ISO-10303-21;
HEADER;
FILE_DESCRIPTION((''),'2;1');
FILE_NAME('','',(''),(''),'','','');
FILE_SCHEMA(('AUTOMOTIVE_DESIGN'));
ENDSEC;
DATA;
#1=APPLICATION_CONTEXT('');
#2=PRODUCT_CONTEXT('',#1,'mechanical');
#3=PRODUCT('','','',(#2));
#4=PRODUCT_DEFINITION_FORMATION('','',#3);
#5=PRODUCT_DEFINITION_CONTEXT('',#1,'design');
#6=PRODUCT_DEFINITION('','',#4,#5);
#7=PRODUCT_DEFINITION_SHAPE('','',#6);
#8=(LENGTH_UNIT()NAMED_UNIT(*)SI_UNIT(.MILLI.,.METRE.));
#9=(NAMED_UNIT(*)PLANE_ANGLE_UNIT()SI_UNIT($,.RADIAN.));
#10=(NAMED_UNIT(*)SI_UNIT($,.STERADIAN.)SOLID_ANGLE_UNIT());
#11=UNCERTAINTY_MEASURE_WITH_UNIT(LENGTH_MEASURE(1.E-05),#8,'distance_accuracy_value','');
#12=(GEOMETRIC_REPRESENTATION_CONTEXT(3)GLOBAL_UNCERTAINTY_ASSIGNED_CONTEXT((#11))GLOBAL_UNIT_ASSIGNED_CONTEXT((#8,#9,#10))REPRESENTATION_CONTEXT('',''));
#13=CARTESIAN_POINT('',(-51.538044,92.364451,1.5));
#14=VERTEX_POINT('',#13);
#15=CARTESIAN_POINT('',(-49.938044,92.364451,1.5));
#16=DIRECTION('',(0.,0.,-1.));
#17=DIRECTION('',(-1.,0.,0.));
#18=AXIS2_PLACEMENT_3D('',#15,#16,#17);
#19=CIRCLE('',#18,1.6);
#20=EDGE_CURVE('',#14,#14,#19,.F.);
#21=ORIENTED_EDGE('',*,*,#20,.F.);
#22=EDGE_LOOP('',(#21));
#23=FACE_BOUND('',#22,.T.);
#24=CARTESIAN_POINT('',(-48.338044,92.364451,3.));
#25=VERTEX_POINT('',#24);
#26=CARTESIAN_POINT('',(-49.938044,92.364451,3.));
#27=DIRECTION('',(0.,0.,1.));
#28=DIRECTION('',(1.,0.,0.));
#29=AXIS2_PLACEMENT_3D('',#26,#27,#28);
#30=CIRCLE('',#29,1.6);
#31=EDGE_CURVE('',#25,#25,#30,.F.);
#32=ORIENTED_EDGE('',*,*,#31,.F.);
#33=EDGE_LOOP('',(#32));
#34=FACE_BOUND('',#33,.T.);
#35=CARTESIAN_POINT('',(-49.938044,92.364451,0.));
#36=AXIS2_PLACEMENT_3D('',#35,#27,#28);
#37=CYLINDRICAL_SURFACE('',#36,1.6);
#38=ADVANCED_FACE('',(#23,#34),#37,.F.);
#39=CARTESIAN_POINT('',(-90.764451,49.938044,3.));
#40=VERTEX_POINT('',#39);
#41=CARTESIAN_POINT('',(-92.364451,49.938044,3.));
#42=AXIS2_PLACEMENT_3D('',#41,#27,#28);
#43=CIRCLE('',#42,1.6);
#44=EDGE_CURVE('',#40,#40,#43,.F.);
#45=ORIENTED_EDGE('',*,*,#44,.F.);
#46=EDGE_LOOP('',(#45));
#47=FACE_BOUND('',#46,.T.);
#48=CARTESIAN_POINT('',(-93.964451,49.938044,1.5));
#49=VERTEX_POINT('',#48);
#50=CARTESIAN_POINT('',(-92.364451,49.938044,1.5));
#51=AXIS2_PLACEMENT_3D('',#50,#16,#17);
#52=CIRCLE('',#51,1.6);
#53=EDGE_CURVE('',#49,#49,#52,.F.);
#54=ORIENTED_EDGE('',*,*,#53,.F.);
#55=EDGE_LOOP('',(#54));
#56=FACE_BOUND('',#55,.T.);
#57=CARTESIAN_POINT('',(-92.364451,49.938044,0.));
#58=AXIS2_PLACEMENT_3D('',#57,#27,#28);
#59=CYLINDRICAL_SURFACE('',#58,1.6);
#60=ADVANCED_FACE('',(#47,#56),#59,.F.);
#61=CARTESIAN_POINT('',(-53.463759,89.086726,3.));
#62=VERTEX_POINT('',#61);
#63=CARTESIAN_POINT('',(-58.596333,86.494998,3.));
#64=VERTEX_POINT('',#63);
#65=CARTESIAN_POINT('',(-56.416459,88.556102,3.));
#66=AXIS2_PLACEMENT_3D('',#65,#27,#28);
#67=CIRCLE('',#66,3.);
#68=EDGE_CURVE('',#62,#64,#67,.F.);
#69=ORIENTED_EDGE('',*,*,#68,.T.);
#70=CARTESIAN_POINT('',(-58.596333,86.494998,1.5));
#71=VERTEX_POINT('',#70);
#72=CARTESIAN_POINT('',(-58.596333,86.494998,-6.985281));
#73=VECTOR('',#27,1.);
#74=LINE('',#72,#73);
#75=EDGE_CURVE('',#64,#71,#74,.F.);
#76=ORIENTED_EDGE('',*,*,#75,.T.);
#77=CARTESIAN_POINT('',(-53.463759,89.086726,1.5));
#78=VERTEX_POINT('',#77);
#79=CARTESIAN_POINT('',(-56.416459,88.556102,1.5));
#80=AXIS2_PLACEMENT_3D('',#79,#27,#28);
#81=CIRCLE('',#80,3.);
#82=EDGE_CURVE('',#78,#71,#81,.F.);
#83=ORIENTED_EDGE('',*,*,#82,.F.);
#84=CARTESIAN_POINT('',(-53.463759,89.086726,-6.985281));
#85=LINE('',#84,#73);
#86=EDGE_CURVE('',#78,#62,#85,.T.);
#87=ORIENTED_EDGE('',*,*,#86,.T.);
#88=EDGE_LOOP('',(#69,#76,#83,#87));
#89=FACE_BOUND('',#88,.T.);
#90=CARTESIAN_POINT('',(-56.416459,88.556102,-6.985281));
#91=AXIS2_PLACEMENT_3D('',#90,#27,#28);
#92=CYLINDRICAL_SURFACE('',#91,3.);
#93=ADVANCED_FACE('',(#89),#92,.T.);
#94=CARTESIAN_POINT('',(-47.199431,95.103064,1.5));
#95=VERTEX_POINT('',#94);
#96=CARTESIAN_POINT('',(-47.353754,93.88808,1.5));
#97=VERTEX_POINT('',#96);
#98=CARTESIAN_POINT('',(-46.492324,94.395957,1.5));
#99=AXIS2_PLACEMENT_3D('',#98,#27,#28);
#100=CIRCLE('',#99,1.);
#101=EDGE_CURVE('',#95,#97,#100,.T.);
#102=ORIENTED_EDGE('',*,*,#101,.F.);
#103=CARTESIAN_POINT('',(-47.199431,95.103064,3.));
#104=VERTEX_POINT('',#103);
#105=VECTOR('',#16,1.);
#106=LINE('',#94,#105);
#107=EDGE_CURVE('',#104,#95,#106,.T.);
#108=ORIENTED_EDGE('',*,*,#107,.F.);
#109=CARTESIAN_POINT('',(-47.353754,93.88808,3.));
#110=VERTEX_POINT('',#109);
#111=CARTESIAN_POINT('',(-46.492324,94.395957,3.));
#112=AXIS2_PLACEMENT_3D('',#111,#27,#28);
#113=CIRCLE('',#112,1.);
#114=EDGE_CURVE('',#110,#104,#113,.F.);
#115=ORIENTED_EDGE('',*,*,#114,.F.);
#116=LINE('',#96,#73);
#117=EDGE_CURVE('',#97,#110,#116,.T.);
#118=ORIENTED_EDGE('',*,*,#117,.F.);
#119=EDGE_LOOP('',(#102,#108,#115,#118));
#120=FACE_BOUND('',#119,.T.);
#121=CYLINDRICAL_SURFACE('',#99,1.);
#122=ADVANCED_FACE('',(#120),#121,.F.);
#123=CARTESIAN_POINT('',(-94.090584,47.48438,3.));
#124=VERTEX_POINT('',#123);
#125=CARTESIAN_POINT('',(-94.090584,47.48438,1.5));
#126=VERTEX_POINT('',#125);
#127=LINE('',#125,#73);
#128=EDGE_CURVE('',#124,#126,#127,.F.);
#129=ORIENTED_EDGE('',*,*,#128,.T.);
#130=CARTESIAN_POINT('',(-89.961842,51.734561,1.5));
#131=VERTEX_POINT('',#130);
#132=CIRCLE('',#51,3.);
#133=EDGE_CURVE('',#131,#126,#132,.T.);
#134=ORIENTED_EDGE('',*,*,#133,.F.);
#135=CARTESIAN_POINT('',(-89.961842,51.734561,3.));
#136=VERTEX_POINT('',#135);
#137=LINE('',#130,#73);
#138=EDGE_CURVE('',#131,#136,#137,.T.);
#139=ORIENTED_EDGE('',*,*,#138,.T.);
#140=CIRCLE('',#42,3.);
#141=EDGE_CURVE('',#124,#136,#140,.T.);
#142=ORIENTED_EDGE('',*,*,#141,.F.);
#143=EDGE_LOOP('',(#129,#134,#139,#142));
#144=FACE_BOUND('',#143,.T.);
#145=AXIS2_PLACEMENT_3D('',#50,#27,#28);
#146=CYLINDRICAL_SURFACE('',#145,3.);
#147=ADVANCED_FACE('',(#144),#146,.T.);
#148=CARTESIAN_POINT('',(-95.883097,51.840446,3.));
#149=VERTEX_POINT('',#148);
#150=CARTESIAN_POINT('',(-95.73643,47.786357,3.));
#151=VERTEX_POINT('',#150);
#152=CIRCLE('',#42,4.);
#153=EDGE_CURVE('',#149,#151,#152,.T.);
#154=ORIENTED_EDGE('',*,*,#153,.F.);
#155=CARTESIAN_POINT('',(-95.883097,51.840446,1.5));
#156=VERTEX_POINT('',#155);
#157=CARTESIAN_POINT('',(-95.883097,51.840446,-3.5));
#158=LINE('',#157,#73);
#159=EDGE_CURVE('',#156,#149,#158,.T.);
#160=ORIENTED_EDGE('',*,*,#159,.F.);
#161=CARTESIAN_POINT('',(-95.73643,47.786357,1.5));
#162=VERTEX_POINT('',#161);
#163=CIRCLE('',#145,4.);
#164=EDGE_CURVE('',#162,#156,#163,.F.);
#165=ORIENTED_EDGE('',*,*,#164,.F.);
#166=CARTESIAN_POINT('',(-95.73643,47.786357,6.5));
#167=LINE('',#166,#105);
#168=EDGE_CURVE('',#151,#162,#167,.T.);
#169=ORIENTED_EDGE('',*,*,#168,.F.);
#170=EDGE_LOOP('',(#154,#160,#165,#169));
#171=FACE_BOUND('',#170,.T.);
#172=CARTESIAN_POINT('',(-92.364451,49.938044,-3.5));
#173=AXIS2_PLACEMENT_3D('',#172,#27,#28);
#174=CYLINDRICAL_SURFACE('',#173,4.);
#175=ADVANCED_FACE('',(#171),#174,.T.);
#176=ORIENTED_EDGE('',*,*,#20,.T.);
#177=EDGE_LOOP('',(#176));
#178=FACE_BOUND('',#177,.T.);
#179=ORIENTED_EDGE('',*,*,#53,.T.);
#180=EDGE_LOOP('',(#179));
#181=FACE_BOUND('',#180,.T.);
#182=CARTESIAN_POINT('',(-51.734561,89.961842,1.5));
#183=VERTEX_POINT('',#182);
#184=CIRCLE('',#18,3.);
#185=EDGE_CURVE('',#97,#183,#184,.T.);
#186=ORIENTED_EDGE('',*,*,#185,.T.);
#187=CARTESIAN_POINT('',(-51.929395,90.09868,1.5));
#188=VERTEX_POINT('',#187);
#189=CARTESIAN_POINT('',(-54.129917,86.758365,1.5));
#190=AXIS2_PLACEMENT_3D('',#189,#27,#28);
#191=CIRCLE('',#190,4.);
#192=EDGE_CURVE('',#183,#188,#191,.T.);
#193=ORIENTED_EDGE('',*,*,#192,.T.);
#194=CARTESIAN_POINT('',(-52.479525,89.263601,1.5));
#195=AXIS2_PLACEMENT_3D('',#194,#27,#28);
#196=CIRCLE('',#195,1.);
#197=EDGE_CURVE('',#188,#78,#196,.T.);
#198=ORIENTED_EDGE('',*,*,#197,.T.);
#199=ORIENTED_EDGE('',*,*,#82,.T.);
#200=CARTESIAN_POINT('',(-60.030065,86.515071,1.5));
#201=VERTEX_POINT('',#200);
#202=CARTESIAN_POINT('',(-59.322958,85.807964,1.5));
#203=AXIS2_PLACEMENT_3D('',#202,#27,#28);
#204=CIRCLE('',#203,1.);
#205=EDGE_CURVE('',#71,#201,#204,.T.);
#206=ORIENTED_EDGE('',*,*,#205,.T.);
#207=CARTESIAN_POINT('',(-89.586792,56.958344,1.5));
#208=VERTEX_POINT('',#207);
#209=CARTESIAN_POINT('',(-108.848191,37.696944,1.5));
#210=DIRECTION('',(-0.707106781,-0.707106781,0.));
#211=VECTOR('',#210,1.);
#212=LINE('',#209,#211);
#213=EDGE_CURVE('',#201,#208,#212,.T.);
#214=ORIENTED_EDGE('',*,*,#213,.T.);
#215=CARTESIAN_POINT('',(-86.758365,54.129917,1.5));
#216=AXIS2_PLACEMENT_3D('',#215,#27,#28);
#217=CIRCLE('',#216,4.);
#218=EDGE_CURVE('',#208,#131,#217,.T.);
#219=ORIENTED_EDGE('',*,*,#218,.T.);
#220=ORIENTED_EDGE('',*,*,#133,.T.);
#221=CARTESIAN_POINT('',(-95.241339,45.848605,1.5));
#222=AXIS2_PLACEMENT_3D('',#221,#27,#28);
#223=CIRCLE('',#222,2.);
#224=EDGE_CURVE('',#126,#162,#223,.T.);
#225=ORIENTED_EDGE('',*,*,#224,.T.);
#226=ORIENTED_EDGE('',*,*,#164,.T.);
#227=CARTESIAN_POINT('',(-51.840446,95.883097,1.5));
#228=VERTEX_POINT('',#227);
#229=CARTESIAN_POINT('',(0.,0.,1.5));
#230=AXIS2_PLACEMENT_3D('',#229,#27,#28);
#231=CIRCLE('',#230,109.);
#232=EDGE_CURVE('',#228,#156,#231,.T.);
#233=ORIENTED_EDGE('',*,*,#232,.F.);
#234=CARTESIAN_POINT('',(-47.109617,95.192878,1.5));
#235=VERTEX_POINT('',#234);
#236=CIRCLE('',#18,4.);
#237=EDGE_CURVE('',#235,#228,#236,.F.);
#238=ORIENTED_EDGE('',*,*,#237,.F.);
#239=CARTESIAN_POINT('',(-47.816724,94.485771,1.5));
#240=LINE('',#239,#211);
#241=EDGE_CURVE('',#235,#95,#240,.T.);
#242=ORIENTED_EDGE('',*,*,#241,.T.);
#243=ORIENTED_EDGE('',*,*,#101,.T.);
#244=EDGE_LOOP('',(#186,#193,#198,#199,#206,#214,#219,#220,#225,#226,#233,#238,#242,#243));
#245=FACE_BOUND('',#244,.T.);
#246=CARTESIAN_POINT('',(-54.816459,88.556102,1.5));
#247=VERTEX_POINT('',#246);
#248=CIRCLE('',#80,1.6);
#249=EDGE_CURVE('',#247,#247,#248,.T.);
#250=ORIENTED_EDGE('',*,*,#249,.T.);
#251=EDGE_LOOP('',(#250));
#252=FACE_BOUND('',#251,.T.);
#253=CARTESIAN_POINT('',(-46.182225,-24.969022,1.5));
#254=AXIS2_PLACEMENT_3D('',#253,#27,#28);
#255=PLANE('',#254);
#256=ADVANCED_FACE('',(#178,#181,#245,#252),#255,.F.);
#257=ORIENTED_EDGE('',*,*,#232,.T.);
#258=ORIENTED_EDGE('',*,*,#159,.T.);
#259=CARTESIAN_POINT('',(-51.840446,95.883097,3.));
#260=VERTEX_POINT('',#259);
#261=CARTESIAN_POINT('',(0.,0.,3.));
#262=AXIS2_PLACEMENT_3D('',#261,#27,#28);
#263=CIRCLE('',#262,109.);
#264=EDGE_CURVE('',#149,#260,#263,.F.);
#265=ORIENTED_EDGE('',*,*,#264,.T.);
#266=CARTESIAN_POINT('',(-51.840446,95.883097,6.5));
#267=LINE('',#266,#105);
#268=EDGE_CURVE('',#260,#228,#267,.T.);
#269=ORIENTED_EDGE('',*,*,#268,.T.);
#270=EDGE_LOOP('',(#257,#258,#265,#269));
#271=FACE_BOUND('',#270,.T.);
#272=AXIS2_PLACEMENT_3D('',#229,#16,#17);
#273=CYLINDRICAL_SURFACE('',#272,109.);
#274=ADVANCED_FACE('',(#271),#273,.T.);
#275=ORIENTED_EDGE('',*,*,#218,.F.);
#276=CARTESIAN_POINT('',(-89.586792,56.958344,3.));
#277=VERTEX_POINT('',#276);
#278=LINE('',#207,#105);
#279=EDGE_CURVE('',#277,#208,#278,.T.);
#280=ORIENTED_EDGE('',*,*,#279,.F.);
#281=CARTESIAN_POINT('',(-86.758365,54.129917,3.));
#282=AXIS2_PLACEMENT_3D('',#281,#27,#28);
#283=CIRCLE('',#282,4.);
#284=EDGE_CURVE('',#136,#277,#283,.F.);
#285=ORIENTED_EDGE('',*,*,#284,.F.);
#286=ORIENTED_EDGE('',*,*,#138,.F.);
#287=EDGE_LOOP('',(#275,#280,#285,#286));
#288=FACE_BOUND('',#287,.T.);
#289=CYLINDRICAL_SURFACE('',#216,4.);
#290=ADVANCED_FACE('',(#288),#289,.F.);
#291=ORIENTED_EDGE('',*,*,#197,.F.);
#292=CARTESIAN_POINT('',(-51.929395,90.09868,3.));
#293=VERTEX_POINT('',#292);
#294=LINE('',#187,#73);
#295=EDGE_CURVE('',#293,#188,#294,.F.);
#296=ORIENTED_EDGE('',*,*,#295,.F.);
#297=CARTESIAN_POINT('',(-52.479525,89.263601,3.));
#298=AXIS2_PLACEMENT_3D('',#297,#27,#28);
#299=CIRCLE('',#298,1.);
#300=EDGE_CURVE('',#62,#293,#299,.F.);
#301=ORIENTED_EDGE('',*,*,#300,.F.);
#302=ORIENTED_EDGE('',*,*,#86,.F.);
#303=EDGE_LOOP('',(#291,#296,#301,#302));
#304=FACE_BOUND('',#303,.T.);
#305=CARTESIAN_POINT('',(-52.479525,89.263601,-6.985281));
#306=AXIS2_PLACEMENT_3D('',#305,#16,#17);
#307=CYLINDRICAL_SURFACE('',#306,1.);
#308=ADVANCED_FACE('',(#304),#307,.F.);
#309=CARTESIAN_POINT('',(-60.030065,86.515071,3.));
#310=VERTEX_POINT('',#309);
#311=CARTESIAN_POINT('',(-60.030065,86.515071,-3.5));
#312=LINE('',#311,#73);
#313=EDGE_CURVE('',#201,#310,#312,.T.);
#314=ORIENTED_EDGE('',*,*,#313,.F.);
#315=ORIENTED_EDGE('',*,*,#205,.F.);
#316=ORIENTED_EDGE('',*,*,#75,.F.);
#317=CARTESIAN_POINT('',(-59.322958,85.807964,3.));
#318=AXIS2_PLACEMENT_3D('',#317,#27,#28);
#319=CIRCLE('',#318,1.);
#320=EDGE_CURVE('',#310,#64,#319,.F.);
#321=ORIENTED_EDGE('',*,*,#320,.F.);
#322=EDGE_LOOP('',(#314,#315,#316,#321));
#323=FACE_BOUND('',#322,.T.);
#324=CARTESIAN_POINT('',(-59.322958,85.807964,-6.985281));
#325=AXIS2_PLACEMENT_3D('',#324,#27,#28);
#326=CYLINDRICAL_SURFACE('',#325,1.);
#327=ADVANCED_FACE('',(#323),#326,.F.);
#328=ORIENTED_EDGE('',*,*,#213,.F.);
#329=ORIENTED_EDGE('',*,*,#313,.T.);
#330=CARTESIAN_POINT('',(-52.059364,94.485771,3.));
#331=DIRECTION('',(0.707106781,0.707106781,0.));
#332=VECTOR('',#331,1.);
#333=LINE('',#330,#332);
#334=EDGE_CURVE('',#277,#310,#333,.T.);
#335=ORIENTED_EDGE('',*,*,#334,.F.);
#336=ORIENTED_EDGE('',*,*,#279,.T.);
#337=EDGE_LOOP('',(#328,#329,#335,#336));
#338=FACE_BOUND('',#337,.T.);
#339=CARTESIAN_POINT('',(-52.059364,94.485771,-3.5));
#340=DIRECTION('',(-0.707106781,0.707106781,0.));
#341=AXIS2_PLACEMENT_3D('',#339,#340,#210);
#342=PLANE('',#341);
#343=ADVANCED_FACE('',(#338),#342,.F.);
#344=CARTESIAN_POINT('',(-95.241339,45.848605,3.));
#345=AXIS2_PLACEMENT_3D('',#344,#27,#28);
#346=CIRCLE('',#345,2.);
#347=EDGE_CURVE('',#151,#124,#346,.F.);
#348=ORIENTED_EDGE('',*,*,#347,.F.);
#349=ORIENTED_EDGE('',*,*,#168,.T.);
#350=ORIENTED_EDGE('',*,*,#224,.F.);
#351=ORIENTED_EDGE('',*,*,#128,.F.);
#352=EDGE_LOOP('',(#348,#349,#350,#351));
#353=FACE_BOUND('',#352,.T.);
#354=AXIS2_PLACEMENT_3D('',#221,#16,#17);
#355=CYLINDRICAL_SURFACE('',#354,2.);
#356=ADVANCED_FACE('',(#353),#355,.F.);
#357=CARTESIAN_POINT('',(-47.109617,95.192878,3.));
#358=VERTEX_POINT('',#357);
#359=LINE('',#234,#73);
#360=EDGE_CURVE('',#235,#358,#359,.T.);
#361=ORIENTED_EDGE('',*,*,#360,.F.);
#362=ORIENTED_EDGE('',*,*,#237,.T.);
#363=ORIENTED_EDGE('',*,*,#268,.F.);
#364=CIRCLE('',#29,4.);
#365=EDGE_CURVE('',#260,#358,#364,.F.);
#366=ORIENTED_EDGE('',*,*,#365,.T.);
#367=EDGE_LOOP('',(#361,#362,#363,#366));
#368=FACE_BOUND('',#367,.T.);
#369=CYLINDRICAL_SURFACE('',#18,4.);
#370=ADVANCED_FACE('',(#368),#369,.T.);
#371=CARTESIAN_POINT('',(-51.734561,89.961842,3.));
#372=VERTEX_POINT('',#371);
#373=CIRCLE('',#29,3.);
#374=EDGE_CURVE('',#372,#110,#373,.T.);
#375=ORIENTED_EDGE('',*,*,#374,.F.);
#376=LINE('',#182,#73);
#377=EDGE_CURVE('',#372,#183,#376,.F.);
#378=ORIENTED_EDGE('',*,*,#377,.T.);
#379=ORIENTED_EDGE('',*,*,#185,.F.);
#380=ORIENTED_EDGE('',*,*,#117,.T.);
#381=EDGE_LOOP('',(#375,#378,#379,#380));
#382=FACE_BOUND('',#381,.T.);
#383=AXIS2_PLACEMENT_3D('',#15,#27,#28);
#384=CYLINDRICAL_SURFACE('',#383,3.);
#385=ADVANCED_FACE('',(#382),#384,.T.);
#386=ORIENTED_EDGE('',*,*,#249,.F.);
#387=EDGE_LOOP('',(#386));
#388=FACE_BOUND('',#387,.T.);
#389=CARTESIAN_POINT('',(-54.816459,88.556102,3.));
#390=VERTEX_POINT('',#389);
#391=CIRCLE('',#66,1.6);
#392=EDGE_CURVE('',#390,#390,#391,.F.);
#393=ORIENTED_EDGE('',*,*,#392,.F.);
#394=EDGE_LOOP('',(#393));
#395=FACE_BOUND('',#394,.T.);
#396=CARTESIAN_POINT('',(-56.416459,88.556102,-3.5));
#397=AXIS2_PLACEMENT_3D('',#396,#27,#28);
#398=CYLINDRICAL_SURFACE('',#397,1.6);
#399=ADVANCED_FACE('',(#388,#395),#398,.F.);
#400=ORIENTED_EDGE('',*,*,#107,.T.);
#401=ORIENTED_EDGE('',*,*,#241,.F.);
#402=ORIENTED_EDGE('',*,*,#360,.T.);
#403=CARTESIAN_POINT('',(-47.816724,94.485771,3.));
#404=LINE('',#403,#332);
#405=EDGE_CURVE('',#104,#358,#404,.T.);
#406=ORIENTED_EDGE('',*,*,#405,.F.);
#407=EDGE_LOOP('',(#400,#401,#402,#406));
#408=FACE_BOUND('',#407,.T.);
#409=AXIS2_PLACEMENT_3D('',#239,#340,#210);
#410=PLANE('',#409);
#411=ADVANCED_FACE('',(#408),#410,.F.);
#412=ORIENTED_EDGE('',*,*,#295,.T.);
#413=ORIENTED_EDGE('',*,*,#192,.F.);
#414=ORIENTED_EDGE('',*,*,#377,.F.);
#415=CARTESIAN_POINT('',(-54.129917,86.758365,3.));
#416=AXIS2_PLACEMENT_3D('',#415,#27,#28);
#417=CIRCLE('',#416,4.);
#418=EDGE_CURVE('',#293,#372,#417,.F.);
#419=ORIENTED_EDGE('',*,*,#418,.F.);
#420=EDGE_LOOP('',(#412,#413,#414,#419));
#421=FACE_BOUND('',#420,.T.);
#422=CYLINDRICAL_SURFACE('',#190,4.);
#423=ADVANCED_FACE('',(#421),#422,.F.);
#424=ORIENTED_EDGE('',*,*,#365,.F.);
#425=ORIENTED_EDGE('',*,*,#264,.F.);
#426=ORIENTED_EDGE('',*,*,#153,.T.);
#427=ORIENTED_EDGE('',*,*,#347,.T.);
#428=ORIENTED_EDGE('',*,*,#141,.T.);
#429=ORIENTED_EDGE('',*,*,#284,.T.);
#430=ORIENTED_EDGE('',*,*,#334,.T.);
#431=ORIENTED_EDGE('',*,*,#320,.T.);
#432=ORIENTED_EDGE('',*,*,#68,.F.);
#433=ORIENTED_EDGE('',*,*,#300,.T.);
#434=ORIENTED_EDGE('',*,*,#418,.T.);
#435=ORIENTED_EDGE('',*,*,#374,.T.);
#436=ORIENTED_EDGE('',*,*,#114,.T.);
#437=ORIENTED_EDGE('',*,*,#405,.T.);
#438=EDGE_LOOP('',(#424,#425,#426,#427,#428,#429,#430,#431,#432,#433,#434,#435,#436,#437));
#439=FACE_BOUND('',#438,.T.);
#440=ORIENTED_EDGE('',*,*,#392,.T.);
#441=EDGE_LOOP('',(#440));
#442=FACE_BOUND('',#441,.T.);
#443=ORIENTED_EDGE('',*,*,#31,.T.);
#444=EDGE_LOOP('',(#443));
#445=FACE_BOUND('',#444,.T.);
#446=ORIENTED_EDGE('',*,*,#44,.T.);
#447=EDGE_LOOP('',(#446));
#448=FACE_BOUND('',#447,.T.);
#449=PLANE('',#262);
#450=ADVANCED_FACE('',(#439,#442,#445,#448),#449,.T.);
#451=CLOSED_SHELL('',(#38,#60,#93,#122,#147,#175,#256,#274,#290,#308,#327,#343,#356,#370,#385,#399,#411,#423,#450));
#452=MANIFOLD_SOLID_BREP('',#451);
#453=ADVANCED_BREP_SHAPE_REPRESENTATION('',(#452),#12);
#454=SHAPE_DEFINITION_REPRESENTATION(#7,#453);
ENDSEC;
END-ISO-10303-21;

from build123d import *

# Parameters (mm, degrees)
FILLET1_OUTLINE_R    = 1.6
FILLET1_OUTLINE_R_2  = 1.4
FILLET1_DEPTH        = 1.5
FILLET2_R            = 1
FILLET3_R            = 4
FILLET6_R            = 1
FILLET7_R            = 1
FILLET8_R            = 2
BOSS_EXTRUDE1_DEPTH  = 1.5
FILLET9_R            = 4
BOSS_EXTRUDE2_START  = -1.5
SKETCH2_R            = 1.6
BOSS_EXTRUDE2_DEPTH  = 1.5
BOSS_EXTRUDE3_START  = -1.5
SKETCH3_R            = 1.6
BOSS_EXTRUDE3_DEPTH  = 1.5
CUT_EXTRUDE1_START   = -1.5
SKETCH4_R            = 1.6
CUT_EXTRUDE1_DEPTH   = 1.5
CUT_EXTRUDE3_DEPTH   = 10
FILLET10_R           = 2
SKETCH6_R            = 61
CUT_EXTRUDE4_DEPTH   = 10
CUT_EXTRUDE5_DEPTH   = 10
FILLET12_R           = 1
SKETCH8_R            = 1.6
BOSS_EXTRUDE5_DEPTH  = 5
CUT_EXTRUDE6_START   = -5
CUT_EXTRUDE6_DEPTH   = 5
SKETCH10_R           = 133.204065673
CUT_EXTRUDE7_DEPTH   = 1.5
FILLET13_R           = 1
FILLET14_R           = 2
CUT_EXTRUDE10_START  = -10
CUT_EXTRUDE10_DEPTH  = 10
BOSS_EXTRUDE10_DEPTH = 5
FILLET15_START       = 1
FILLET15_DEPTH       = 6
CUT_EXTRUDE13_START  = -10
CUT_EXTRUDE13_DEPTH  = 10
FILLET16_R           = 4
SKETCH14_R           = 1.6
CUT_EXTRUDE16_DEPTH  = 10
SKETCH15_R           = 3
SKETCH15_R_2         = 1.6
BOSS_EXTRUDE11_DEPTH = 5
FILLET17_R           = 1
SKETCH16_R           = 171.814222802
CUT_EXTRUDE17_DEPTH  = 3.5


with BuildPart() as part:
    # Fillet1: read off the stored shape, not the designer's step
    # Fillet1 outline → Fillet1 (new body)
    with BuildSketch(Plane.XY):
        with BuildLine():
            Line((-52.766471043, 89.536023665), (-42.779960262, 79.549512884))
            Line((-42.779960262, 79.549512884), (-79.549512883, 42.779960262))
            Line((-79.549512883, 42.779960262), (-89.536023665, 52.766471043))
            ThreePointArc((-89.536023665, 52.766471043), (-92.941929118, 53.896139266), (-95.883096534, 51.840445591))
            ThreePointArc((-95.883096534, 51.840445591), (-109, 0), (-95.883096534, -51.840445591))
            ThreePointArc((-95.883096534, -51.840445591), (-92.941929118, -53.896139266), (-89.536023665, -52.766471043))
            Line((-89.536023665, -52.766471043), (-79.549512883, -42.779960262))
            Line((-79.549512883, -42.779960262), (-42.779960262, -79.549512883))
            Line((-42.779960262, -79.549512883), (-52.766471043, -89.536023665))
            ThreePointArc((-52.766471043, -89.536023665), (-53.896139266, -92.941929118), (-51.840445591, -95.883096534))
            ThreePointArc((-51.840445591, -95.883096534), (-50.184016899, -96.760345431), (-48.512748328, -97.608981399))
            ThreePointArc((-48.512748328, -97.608981399), (-47.646815155, -97.921093641), (-46.732463985, -98.02700043))
            Line((-46.732463985, -98.02700043), (46.732463985, -98.02700043))
            ThreePointArc((46.732463985, -98.02700043), (47.646815155, -97.921093641), (48.512748328, -97.608981399))
            ThreePointArc((48.512748328, -97.608981399), (50.184016899, -96.760345431), (51.840445591, -95.883096534))
            ThreePointArc((51.840445591, -95.883096534), (53.896139266, -92.941929118), (52.766471043, -89.536023665))
            Line((52.766471043, -89.536023665), (42.779960262, -79.549512884))
            Line((42.779960262, -79.549512884), (79.549512884, -42.779960262))
            Line((79.549512884, -42.779960262), (89.536023665, -52.766471043))
            ThreePointArc((89.536023665, -52.766471043), (92.941929118, -53.896139266), (95.883096534, -51.840445591))
            ThreePointArc((95.883096534, -51.840445591), (109, 0), (95.883096534, 51.840445591))
            ThreePointArc((95.883096534, 51.840445591), (92.941929118, 53.896139266), (89.536023665, 52.766471043))
            Line((89.536023665, 52.766471043), (79.549512883, 42.779960262))
            Line((79.549512883, 42.779960262), (42.779960262, 79.549512884))
            Line((42.779960262, 79.549512884), (52.766471043, 89.536023665))
            ThreePointArc((52.766471043, 89.536023665), (53.896139266, 92.941929118), (51.840445591, 95.883096534))
            ThreePointArc((51.840445591, 95.883096534), (51.446125895, 96.095245098), (51.050938033, 96.305772029))
            Line((51.050938033, 96.305772029), (31.745166004, 77))
            Line((31.745166004, 77), (-31.745166004, 77))
            Line((-31.745166004, 77), (-51.050938033, 96.305772029))
            ThreePointArc((-51.050938033, 96.305772029), (-51.446125895, 96.095245098), (-51.840445591, 95.883096534))
            ThreePointArc((-51.840445591, 95.883096534), (-53.896139266, 92.941929118), (-52.766471043, 89.536023665))
        make_face()
        with Locations((-92.27579683, -50.101669827)):
            Circle(FILLET1_OUTLINE_R, mode=Mode.SUBTRACT)
        with Locations((-50.101669828, -92.275796829)):
            Circle(FILLET1_OUTLINE_R, mode=Mode.SUBTRACT)
        with BuildLine():
            Line((-27.999999998, -90.02700043), (-41.861882029, -90.02700043))
            Line((-41.861882029, -90.02700043), (-37.123106012, -85.206367133))
            ThreePointArc((-37.123106012, -85.206367133), (-34.779960262, -79.549512884), (-37.123106012, -73.892658634))
            Line((-37.123106012, -73.892658634), (-44.194173825, -66.821590821))
            Line((-44.194173825, -66.821590821), (-35.419577284, -58.046994281))
            ThreePointArc((-35.419577284, -58.046994281), (-31.770328056, -60.12192824), (-27.999999998, -61.96773354))
            Line((-27.999999998, -61.96773354), (-27.999999998, -90.02700043))
        make_face(mode=Mode.SUBTRACT)
        with Locations((-23.999999998, -90)):
            Circle(FILLET1_OUTLINE_R, mode=Mode.SUBTRACT)
        with Locations((-46.492270863, -64.877047174)):
            Circle(FILLET1_OUTLINE_R_2, mode=Mode.SUBTRACT)
        with BuildLine():
            Line((-40.489419991, -54.631555614), (-48.436814511, -62.578950135))
            Line((-48.436814511, -62.578950135), (-62.479030953, -48.536733693))
            Line((-62.479030953, -48.536733693), (-54.492060142, -40.676963769))
            ThreePointArc((-54.492060142, -40.676963769), (-48.000552605, -48.165827612), (-40.489419991, -54.631555614))
        make_face(mode=Mode.SUBTRACT)
        with Locations((-40.835416614, -59.220192924)):
            Circle(FILLET1_OUTLINE_R_2, mode=Mode.SUBTRACT)
        with Locations((-64.877047174, -46.492270863)):
            Circle(FILLET1_OUTLINE_R_2, mode=Mode.SUBTRACT)
        with Locations((-59.220192925, -40.835416614)):
            Circle(FILLET1_OUTLINE_R_2, mode=Mode.SUBTRACT)
        with BuildLine():
            ThreePointArc((-73.892658634, -37.123106012), (-79.549512884, -34.779960262), (-85.206367133, -37.123106012))
            ThreePointArc((-85.206367133, -37.123106012), (-88.293174595, -40.113953283), (-91.303559052, -43.1817103))
            ThreePointArc((-91.303559052, -43.1817103), (-94.614957198, -35.341333794), (-97.254498611, -27.25))
            Line((-97.254498611, -27.25), (-62.301183777, -27.25))
            ThreePointArc((-62.301183777, -27.25), (-60.218013119, -31.58782829), (-57.833278956, -35.767469092))
            Line((-57.833278956, -35.767469092), (-66.690457063, -44.325307583))
            Line((-66.690457063, -44.325307583), (-73.892658634, -37.123106012))
        make_face(mode=Mode.SUBTRACT)
        with Locations((-98, -23.25)):
            Circle(FILLET1_OUTLINE_R, mode=Mode.SUBTRACT)
        with Locations((-68.5, -23.25)):
            Circle(FILLET1_OUTLINE_R, mode=Mode.SUBTRACT)
        with Locations((23.999999998, -90)):
            Circle(FILLET1_OUTLINE_R, mode=Mode.SUBTRACT)
        with Locations((50.101669827, -92.275796829)):
            Circle(FILLET1_OUTLINE_R, mode=Mode.SUBTRACT)
        with BuildLine():
            ThreePointArc((28, -61.967733539), (31.770328056, -60.121928239), (35.419577283, -58.046994281))
            Line((35.419577283, -58.046994281), (44.194173824, -66.821590822))
            Line((44.194173824, -66.821590822), (37.123106012, -73.892658634))
            ThreePointArc((37.123106012, -73.892658634), (34.779960262, -79.549512884), (37.123106012, -85.206367133))
            ThreePointArc((37.123106012, -85.206367133), (39.468585064, -87.64018675), (41.861882029, -90.02700043))
            Line((41.861882029, -90.02700043), (28, -90.02700043))
            Line((28, -90.02700043), (28, -61.967733539))
        make_face(mode=Mode.SUBTRACT)
        with Locations((46.492270863, -64.877047174)):
            Circle(FILLET1_OUTLINE_R_2, mode=Mode.SUBTRACT)
        with Locations((40.835416614, -59.220192924)):
            Circle(FILLET1_OUTLINE_R_2, mode=Mode.SUBTRACT)
        with BuildLine():
            Line((62.479030953, -48.536733693), (48.436814511, -62.578950135))
            Line((48.436814511, -62.578950135), (40.489419991, -54.631555614))
            ThreePointArc((40.489419991, -54.631555614), (48.000552605, -48.165827612), (54.492060142, -40.676963769))
            Line((54.492060142, -40.676963769), (62.479030953, -48.536733693))
        make_face(mode=Mode.SUBTRACT)
        with Locations((92.27579683, -50.101669827)):
            Circle(FILLET1_OUTLINE_R, mode=Mode.SUBTRACT)
        with BuildLine():
            ThreePointArc((-20, -56.568542495), (0, 60), (20, -56.568542495))
            Line((20, -56.568542495), (20, -94.013500215))
            Line((20, -94.013500215), (-4e-09, -94.02700043))
            Line((-4e-09, -94.02700043), (-20, -94.013500215))
            Line((-20, -94.013500215), (-20, -56.568542495))
        make_face(mode=Mode.SUBTRACT)
        with Locations((64.877047174, -46.492270863)):
            Circle(FILLET1_OUTLINE_R_2, mode=Mode.SUBTRACT)
        with Locations((59.220192924, -40.835416614)):
            Circle(FILLET1_OUTLINE_R_2, mode=Mode.SUBTRACT)
        with BuildLine():
            Line((62.301183777, -27.25), (97.254498611, -27.25))
            ThreePointArc((97.254498611, -27.25), (94.614957198, -35.341333794), (91.303559052, -43.1817103))
            ThreePointArc((91.303559052, -43.1817103), (88.293174595, -40.113953283), (85.206367133, -37.123106012))
            ThreePointArc((85.206367133, -37.123106012), (79.549512884, -34.779960262), (73.892658634, -37.123106012))
            Line((73.892658634, -37.123106012), (66.690457063, -44.325307584))
            Line((66.690457063, -44.325307584), (57.833278956, -35.767469092))
            ThreePointArc((57.833278956, -35.767469092), (60.218013119, -31.58782829), (62.301183777, -27.25))
        make_face(mode=Mode.SUBTRACT)
        with Locations((68.5, -23.25)):
            Circle(FILLET1_OUTLINE_R, mode=Mode.SUBTRACT)
        with Locations((98, -23.25)):
            Circle(FILLET1_OUTLINE_R, mode=Mode.SUBTRACT)
        with BuildLine():
            ThreePointArc((-99.148562773, -19.25), (-101, 0), (-99.148562773, 19.25))
            Line((-99.148562773, 19.25), (-65.218383145, 19.25))
            ThreePointArc((-65.218383145, 19.25), (-68, 0), (-65.218383145, -19.25))
            Line((-65.218383145, -19.25), (-99.148562773, -19.25))
        make_face(mode=Mode.SUBTRACT)
        with Locations((-98, 23.25)):
            Circle(FILLET1_OUTLINE_R, mode=Mode.SUBTRACT)
        with Locations((-64, 0)):
            Circle(FILLET1_OUTLINE_R, mode=Mode.SUBTRACT)
        with Locations((-68.5, 23.25)):
            Circle(FILLET1_OUTLINE_R, mode=Mode.SUBTRACT)
        with BuildLine():
            Line((-62.301183777, 27.25), (-97.254498611, 27.25))
            ThreePointArc((-97.254498611, 27.25), (-94.614957198, 35.341333794), (-91.303559052, 43.1817103))
            ThreePointArc((-91.303559052, 43.1817103), (-88.293174595, 40.113953283), (-85.206367133, 37.123106012))
            ThreePointArc((-85.206367133, 37.123106012), (-79.549512884, 34.779960262), (-73.892658634, 37.123106012))
            Line((-73.892658634, 37.123106012), (-66.690457063, 44.325307584))
            Line((-66.690457063, 44.325307584), (-57.833278956, 35.767469092))
            ThreePointArc((-57.833278956, 35.767469092), (-60.218013119, 31.58782829), (-62.301183777, 27.25))
        make_face(mode=Mode.SUBTRACT)
        with Locations((-59.220192925, 40.835416614)):
            Circle(FILLET1_OUTLINE_R_2, mode=Mode.SUBTRACT)
        with Locations((-64.877047174, 46.492270863)):
            Circle(FILLET1_OUTLINE_R_2, mode=Mode.SUBTRACT)
        with Locations((-92.27579683, 50.101669827)):
            Circle(FILLET1_OUTLINE_R, mode=Mode.SUBTRACT)
        with BuildLine():
            ThreePointArc((-40.489419991, 54.631555614), (-48.000552605, 48.165827612), (-54.492060142, 40.676963769))
            Line((-54.492060142, 40.676963769), (-62.479030953, 48.536733693))
            Line((-62.479030953, 48.536733693), (-48.436814511, 62.578950135))
            Line((-48.436814511, 62.578950135), (-40.489419991, 54.631555614))
        make_face(mode=Mode.SUBTRACT)
        with Locations((-40.835416614, 59.220192924)):
            Circle(FILLET1_OUTLINE_R_2, mode=Mode.SUBTRACT)
        with Locations((-46.492270863, 64.877047174)):
            Circle(FILLET1_OUTLINE_R_2, mode=Mode.SUBTRACT)
        with BuildLine():
            Line((-44.194173824, 66.821590822), (-40.015764646, 71))
            Line((-40.015764646, 71), (-31.745166004, 71))
            Line((-31.745166004, 71), (-18.99999793, 70.951058904))
            Line((-18.99999793, 70.951058904), (-18.999992628, 68.264642036))
            Line((-18.999992628, 68.264642036), (-19.01142159, 65.288328583))
            ThreePointArc((-19.01142159, 65.288328583), (-27.455284376, 62.210990667), (-35.419577283, 58.046994281))
            Line((-35.419577283, 58.046994281), (-44.194173824, 66.821590822))
        make_face(mode=Mode.SUBTRACT)
        with Locations((-15, 66.122776602)):
            Circle(FILLET1_OUTLINE_R, mode=Mode.SUBTRACT)
        with Locations((-36.042175759, 77.089910724)):
            Circle(FILLET1_OUTLINE_R, mode=Mode.SUBTRACT)
        with Locations((-51.089613767, 91.732498958)):
            Circle(FILLET1_OUTLINE_R, mode=Mode.SUBTRACT)
        with Locations((64, 0)):
            Circle(FILLET1_OUTLINE_R, mode=Mode.SUBTRACT)
        with Locations((68.5, 23.25)):
            Circle(FILLET1_OUTLINE_R, mode=Mode.SUBTRACT)
        with BuildLine():
            ThreePointArc((99.148562773, 19.25), (101, 0), (99.148562773, -19.25))
            Line((99.148562773, -19.25), (65.218383145, -19.25))
            ThreePointArc((65.218383145, -19.25), (68, 0), (65.218383145, 19.25))
            Line((65.218383145, 19.25), (99.148562773, 19.25))
        make_face(mode=Mode.SUBTRACT)
        with Locations((98, 23.25)):
            Circle(FILLET1_OUTLINE_R, mode=Mode.SUBTRACT)
        with Locations((59.220192924, 40.835416614)):
            Circle(FILLET1_OUTLINE_R_2, mode=Mode.SUBTRACT)
        with Locations((64.877047174, 46.492270863)):
            Circle(FILLET1_OUTLINE_R_2, mode=Mode.SUBTRACT)
        with BuildLine():
            ThreePointArc((73.892658634, 37.123106012), (79.549512884, 34.779960262), (85.206367133, 37.123106012))
            ThreePointArc((85.206367133, 37.123106012), (88.293174595, 40.113953283), (91.303559052, 43.1817103))
            ThreePointArc((91.303559052, 43.1817103), (94.614957198, 35.341333794), (97.254498611, 27.25))
            Line((97.254498611, 27.25), (62.301183777, 27.25))
            ThreePointArc((62.301183777, 27.25), (60.218013119, 31.58782829), (57.833278956, 35.767469092))
            Line((57.833278956, 35.767469092), (66.690457063, 44.325307583))
            Line((66.690457063, 44.325307583), (73.892658634, 37.123106012))
        make_face(mode=Mode.SUBTRACT)
        with Locations((0, 64)):
            Circle(FILLET1_OUTLINE_R, mode=Mode.SUBTRACT)
        with BuildLine():
            Line((-11, 67.104396279), (-11, 70.930497512))
            Line((-11, 70.930497512), (0, 71))
            Line((0, 71), (11, 71))
            Line((11, 71), (11, 67.104396279))
            ThreePointArc((11, 67.104396279), (0, 68), (-11, 67.104396279))
        make_face(mode=Mode.SUBTRACT)
        with Locations((15, 66.122776602)):
            Circle(FILLET1_OUTLINE_R, mode=Mode.SUBTRACT)
        with Locations((40.835416614, 59.220192924)):
            Circle(FILLET1_OUTLINE_R_2, mode=Mode.SUBTRACT)
        with BuildLine():
            ThreePointArc((54.492060142, 40.676963769), (48.000552606, 48.165827612), (40.489419991, 54.631555614))
            Line((40.489419991, 54.631555614), (48.436814511, 62.578950135))
            Line((48.436814511, 62.578950135), (62.479030953, 48.536733693))
            Line((62.479030953, 48.536733693), (54.492060142, 40.676963769))
        make_face(mode=Mode.SUBTRACT)
        with BuildLine():
            Line((19.012475672, 65.288021634), (18.990729901, 70.951023316))
            Line((18.990729901, 70.951023316), (31.745166003, 71))
            Line((31.745166003, 71), (40.015764645, 71))
            Line((40.015764645, 71), (44.194173823, 66.821590822))
            Line((44.194173823, 66.821590822), (35.419577282, 58.046994281))
            ThreePointArc((35.419577282, 58.046994281), (27.455786576, 62.210769032), (19.012475672, 65.288021634))
        make_face(mode=Mode.SUBTRACT)
        with Locations((46.492270863, 64.877047174)):
            Circle(FILLET1_OUTLINE_R_2, mode=Mode.SUBTRACT)
        with Locations((36.042175759, 77.089910724)):
            Circle(FILLET1_OUTLINE_R, mode=Mode.SUBTRACT)
        with Locations((51.089613767, 91.732498958)):
            Circle(FILLET1_OUTLINE_R, mode=Mode.SUBTRACT)
        with Locations((92.27579683, 50.101669827)):
            Circle(FILLET1_OUTLINE_R, mode=Mode.SUBTRACT)
    extrude(amount=FILLET1_DEPTH)

    # Fillet2
    fillet2_edges = [part.edges().sort_by_distance(p)[0] for p in [
        (-51.050938033, 96.305772029, 0.75),
        (51.050938033, 96.305772029, 0.75),
    ]]
    fillet(fillet2_edges, radius=FILLET2_R)

    # Fillet3
    fillet3_edges = [part.edges().sort_by_distance(p)[0] for p in [
        (-31.745166004, 77, 0.75),
        (31.745166004, 77, 0.75),
    ]]
    fillet(fillet3_edges, radius=FILLET3_R)

    # Fillet6
    fillet6_edges = [part.edges().sort_by_distance(p)[0] for p in [
        (-48.436814511, 62.578950135, 0.75),
        (-40.489419991, 54.631555614, 0.75),
        (-62.479030953, 48.536733693, 0.75),
        (-54.492060142, 40.676963769, 0.75),
        (-44.194173824, 66.821590822, 0.75),
        (-40.015764646, 71, 0.75),
        (-35.419577283, 58.046994281, 0.75),
        (-19.01142159, 65.288328583, 0.75),
        (-18.99999793, 70.951058904, 0.75),
        (-31.745166004, 71, 0.75),
        (-57.833278956, 35.767469092, 0.75),
        (-66.690457063, 44.325307584, 0.75),
        (19.012475672, 65.288021634, 0.75),
        (18.990729901, 70.951023316, 0.75),
        (35.419577282, 58.046994281, 0.75),
        (44.194173823, 66.821590822, 0.75),
        (40.015764645, 71, 0.75),
        (31.745166003, 71, 0.75),
        (54.492060142, 40.676963769, 0.75),
        (40.489419991, 54.631555614, 0.75),
        (62.479030953, 48.536733693, 0.75),
        (48.436814511, 62.578950135, 0.75),
        (-11, 67.104396279, 0.75),
        (-11, 70.930497512, 0.75),
        (11, 67.104396279, 0.75),
        (11, 71, 0.75),
    ]]
    fillet(fillet6_edges, radius=FILLET6_R)

    # Fillet7
    fillet7_edges = [part.edges().sort_by_distance(p)[0] for p in [
        (40.489419991, -54.631555614, 0.75),
        (54.492060142, -40.676963769, 0.75),
        (48.436814511, -62.578950135, 0.75),
        (62.479030953, -48.536733693, 0.75),
        (-54.492060142, -40.676963769, 0.75),
        (-40.489419991, -54.631555614, 0.75),
        (-62.479030953, -48.536733693, 0.75),
        (-48.436814511, -62.578950135, 0.75),
        (66.690457063, 44.325307583, 0.75),
        (57.833278956, 35.767469092, 0.75),
        (62.301183777, 27.25, 0.75),
        (97.254498611, 27.25, 0.75),
        (91.303559052, 43.1817103, 0.75),
        (-99.148562773, 19.25, 0.75),
        (-99.148562773, -19.25, 0.75),
        (-65.218383145, -19.25, 0.75),
        (-65.218383145, 19.25, 0.75),
        (-66.690457063, -44.325307583, 0.75),
        (-57.833278956, -35.767469092, 0.75),
        (-62.301183777, -27.25, 0.75),
        (-97.254498611, -27.25, 0.75),
        (-91.303559052, -43.1817103, 0.75),
        (-62.301183777, 27.25, 0.75),
        (-97.254498611, 27.25, 0.75),
        (-91.303559052, 43.1817103, 0.75),
        (62.301183777, -27.25, 0.75),
        (97.254498611, -27.25, 0.75),
        (57.833278956, -35.767469092, 0.75),
        (66.690457063, -44.325307584, 0.75),
        (91.303559052, -43.1817103, 0.75),
        (99.148562773, -19.25, 0.75),
        (99.148562773, 19.25, 0.75),
        (65.218383145, 19.25, 0.75),
        (65.218383145, -19.25, 0.75),
        (28, -61.967733539, 0.75),
        (35.419577283, -58.046994281, 0.75),
        (28, -90.02700043, 0.75),
        (41.861882029, -90.02700043, 0.75),
        (44.194173824, -66.821590822, 0.75),
        (-41.861882029, -90.02700043, 0.75),
        (-27.999999998, -90.02700043, 0.75),
        (-27.999999998, -61.96773354, 0.75),
        (-35.419577284, -58.046994281, 0.75),
        (-44.194173825, -66.821590821, 0.75),
    ]]
    fillet(fillet7_edges, radius=FILLET7_R)

    # Fillet8
    fillet8_edges = [part.edges().sort_by_distance(p)[0] for p in [
        (20, -56.568542495, 0.75),
        (-20, -56.568542495, 0.75),
        (-20, -94.013500215, 0.75),
        (20, -94.013500215, 0.75),
        (-42.779960262, 79.549512884, 0.75),
        (42.779960262, 79.549512884, 0.75),
        (79.549512883, 42.779960262, 0.75),
        (79.549512884, -42.779960262, 0.75),
        (42.779960262, -79.549512884, 0.75),
        (-42.779960262, -79.549512883, 0.75),
        (-79.549512883, -42.779960262, 0.75),
        (-79.549512883, 42.779960262, 0.75),
    ]]
    fillet(fillet8_edges, radius=FILLET8_R)

    # Sketch1 → Boss-Extrude1 (add)
    with BuildSketch(Plane.XY.offset(1.5)):
        Polygon((51.840445591, 95.883096534), (49.820140502, 97.903401623), (28.916738879, 77), (30.937043968, 74.979694911), align=None)
        Polygon((-30.937043968, 74.979694911), (-51.840445591, 95.883096534), (-49.820140502, 97.903401623), (-28.916738879, 77), align=None)
    extrude(amount=-BOSS_EXTRUDE1_DEPTH)

    # Fillet9
    # the kernel refuses this fillet: 4 mm, written as the material it takes off along each edge
    with BuildSketch(Plane(origin=(49.820140502, 97.903401623, 11.083148475), x_dir=(-0.7071067811865457, -0.7071067811865495, 0), z_dir=(0, 0, -1))) as fillet9_piece_1:
        with BuildLine():
            CenterArc((3.83325939, -4), FILLET9_R, 90, 73.398450397)
            Line((0, -2.857142857), (-0.076665188, -2.834285714))
            ThreePointArc((-0.076665188, -2.834285714), (-0.08, -1.428571428), (-0.08, 0))
            Line((-0.08, 0), (0, 0.08))
            Line((0, 0.08), (3.83325939, 0.08))
            Line((3.83325939, 0.08), (3.83325939, 0))
        make_face()
    extrude(amount=20.66629695, mode=Mode.SUBTRACT)
    with BuildSketch(Plane(origin=(-49.820140502, 97.903401623, 11.083148475), x_dir=(-0.7071067811734814, -0.7071067811996137, 0), z_dir=(0, 0, -1))) as fillet9_piece_2:
        with BuildLine():
            CenterArc((4, -3.83325939), FILLET9_R, 106.601549604, 73.398450397)
            Line((0, -3.83325939), (-0.08, -3.83325939))
            Line((-0.08, -3.83325939), (-0.08, 0))
            Line((-0.08, 0), (0, 0.08))
            ThreePointArc((0, 0.08), (1.428571428, 0.08), (2.834285714, 0.076665188))
            Line((2.834285714, 0.076665188), (2.857142857, 0))
        make_face()
    extrude(amount=20.66629695, mode=Mode.SUBTRACT)

    # Sketch2 → Boss-Extrude2 (add)
    with BuildSketch(Plane.XY.offset(1.5).offset(BOSS_EXTRUDE2_START)):
        with Locations((51.089613767, 91.732498958)):
            Circle(SKETCH2_R)
    extrude(amount=BOSS_EXTRUDE2_DEPTH)

    # Sketch3 → Boss-Extrude3 (add)
    with BuildSketch(Plane.XY.offset(1.5).offset(BOSS_EXTRUDE3_START)):
        with Locations((-92.27579683, 50.101669827)):
            Circle(SKETCH3_R)
        with Locations((-92.27579683, -50.101669827)):
            Circle(SKETCH3_R)
        with Locations((92.364450789, 49.938043918)):
            Circle(SKETCH3_R)
        with Locations((-50.101669828, -92.275796829)):
            Circle(SKETCH3_R)
        with Locations((50.101669827, -92.275796829)):
            Circle(SKETCH3_R)
        with Locations((92.27579683, -50.101669827)):
            Circle(SKETCH3_R)
        with Locations((-51.089613767, 91.732498958)):
            Circle(SKETCH3_R)
    extrude(amount=BOSS_EXTRUDE3_DEPTH)

    # Sketch4 → Cut-Extrude1 (cut)
    with BuildSketch(Plane.XY.offset(1.5).offset(CUT_EXTRUDE1_START)):
        with Locations((92.364450789, 49.938043918)):
            Circle(SKETCH4_R)
        with Locations((49.938043918, 92.364450789)):
            Circle(SKETCH4_R)
        with Locations((-92.364450789, 49.938043918)):
            Circle(SKETCH4_R)
        with Locations(Location((-49.938043918, 92.364450789, 0), (0, 0, 180))):
            Circle(SKETCH4_R)
        with Locations(Location((-92.364450789, -49.938043918, 0), (0, 0, 180))):
            Circle(SKETCH4_R)
        with Locations((-49.938043918, -92.364450789)):
            Circle(SKETCH4_R)
        with Locations(Location((49.938043918, -92.364450789, 0), (0, 0, 180))):
            Circle(SKETCH4_R)
        with Locations((92.364450789, -49.938043918)):
            Circle(SKETCH4_R)
    extrude(amount=CUT_EXTRUDE1_DEPTH, mode=Mode.SUBTRACT)

    # Sketch5 → Cut-Extrude3 (cut)
    with BuildSketch(Plane.XY.offset(1.5)):
        Polygon((41.365746702, 78.135299324), (78.135299324, 41.365746702), (85.249875055, 48.480322434), (48.480322433, 85.249875055), align=None)
        Polygon((-48.480322433, 85.249875055), (-85.249875055, 48.480322434), (-78.135299324, 41.365746702), (-41.365746702, 78.135299324), align=None)
        Polygon((-41.365746702, -78.135299324), (-78.135299324, -41.365746702), (-85.249875055, -48.480322433), (-48.480322433, -85.249875055), align=None)
        Polygon((48.480322433, -85.249875055), (85.249875055, -48.480322433), (78.135299324, -41.365746702), (41.365746702, -78.135299324), align=None)
    extrude(amount=-CUT_EXTRUDE3_DEPTH, mode=Mode.SUBTRACT)

    # Fillet10
    fillet10_edges = [part.edges().sort_by_distance(p)[0] for p in [
        (-41.365746702, 78.135299324, 0.75),
        (-78.135299324, 41.365746702, 0.75),
        (78.135299324, 41.365746702, 0.75),
        (41.365746702, 78.135299324, 0.75),
        (-78.135299324, -41.365746702, 0.75),
        (-41.365746702, -78.135299324, 0.75),
        (41.365746702, -78.135299324, 0.75),
        (78.135299324, -41.365746702, 0.75),
    ]]
    fillet(fillet10_edges, radius=FILLET10_R)

    # Sketch6 → Cut-Extrude4 (cut)
    with BuildSketch(Plane.XY.offset(1.5)):
        Circle(SKETCH6_R)
    extrude(amount=-CUT_EXTRUDE4_DEPTH, mode=Mode.SUBTRACT)

    # Sketch7 → Cut-Extrude5 (cut)
    with BuildSketch(Plane.XY.offset(1.5)):
        Polygon((-21, -74.990178383), (-21, -49.799253287), (21, -49.799253287), (21, -74.990178383), (21, -95.02700043), (0, -95.02700043), (-21, -95.02700043), align=None)
    extrude(amount=-CUT_EXTRUDE5_DEPTH, mode=Mode.SUBTRACT)

    # Fillet12
    fillet12_edges = [part.edges().sort_by_distance(p)[0] for p in [
        (21, -57.271284253, 0.75),
        (-21, -57.271284253, 0.75),
        (21, -95.02700043, 0.75),
        (-21, -95.02700043, 0.75),
    ]]
    fillet(fillet12_edges, radius=FILLET12_R)

    # Sketch8 → Boss-Extrude5 (add)
    with BuildSketch(Plane.XY.offset(1.5)):
        with BuildLine():
            ThreePointArc((-51.840445591, -95.883096534), (-46.514100829, -90.296453274), (-53.93777787, -92.41058445))
            ThreePointArc((-53.93777787, -92.41058445), (-75.660425587, -75.660425587), (-92.41058445, -53.93777787))
            ThreePointArc((-92.41058445, -53.93777787), (-88.845805045, -48.035642245), (-95.736430137, -47.786357306))
            ThreePointArc((-95.736430137, -47.786357306), (-107, 0), (-95.736430137, 47.786357306))
            ThreePointArc((-95.736430137, 47.786357306), (-88.845805045, 48.035642245), (-92.41058445, 53.93777787))
            ThreePointArc((-92.41058445, 53.93777787), (-75.660425587, 75.660425587), (-53.93777787, 92.41058445))
            ThreePointArc((-53.93777787, 92.41058445), (-46.514100829, 90.296453274), (-51.840445591, 95.883096534))
            ThreePointArc((-51.840445591, 95.883096534), (-109, 0), (-51.840445591, -95.883096534))
        make_face()
        with Locations((-49.938043918, -92.364450789)):
            Circle(SKETCH8_R, mode=Mode.SUBTRACT)
        with Locations((-92.364450789, -49.938043918)):
            Circle(SKETCH8_R, mode=Mode.SUBTRACT)
        with Locations((-92.364450789, 49.938043918)):
            Circle(SKETCH8_R, mode=Mode.SUBTRACT)
        with Locations((-49.938043918, 92.364450789)):
            Circle(SKETCH8_R, mode=Mode.SUBTRACT)
    extrude(amount=BOSS_EXTRUDE5_DEPTH)

    # Sketch9 → Cut-Extrude6 (cut)
    with BuildSketch(Plane.XY.offset(6.5).offset(CUT_EXTRUDE6_START)):
        with BuildLine():
            Line((-94.8934353, -48.324278959), (-95.736430137, -47.786357306))
            ThreePointArc((-95.736430137, -47.786357306), (-88.85683433, -48.01538254), (-92.364450789, -53.938043918))
            Line((-92.364450789, -53.938043918), (-92.364450789, -52.938043918))
            ThreePointArc((-92.364450789, -52.938043918), (-89.733738445, -48.496047884), (-94.8934353, -48.324278959))
        make_face()
        with BuildLine():
            Line((-52.938043918, -92.364450789), (-53.938043918, -92.364450789))
            ThreePointArc((-53.938043918, -92.364450789), (-48.407310189, -88.668932659), (-47.109616793, -95.192877914))
            Line((-47.109616793, -95.192877914), (-47.816723575, -94.485771133))
            ThreePointArc((-47.816723575, -94.485771133), (-48.789993621, -89.592812192), (-52.938043918, -92.364450789))
        make_face()
        with BuildLine():
            Line((-47.816723575, 94.485771133), (-47.109616793, 95.192877914))
            ThreePointArc((-47.109616793, 95.192877914), (-48.407310189, 88.668932659), (-53.938043918, 92.364450789))
            Line((-53.938043918, 92.364450789), (-52.938043918, 92.364450789))
            ThreePointArc((-52.938043918, 92.364450789), (-48.789993621, 89.592812192), (-47.816723575, 94.485771133))
        make_face()
        with BuildLine():
            Line((-92.364450789, 53.938043918), (-92.364450789, 52.938043918))
            ThreePointArc((-92.364450789, 52.938043918), (-89.733738445, 48.496047884), (-94.8934353, 48.324278959))
            Line((-94.8934353, 48.324278959), (-95.736430137, 47.786357306))
            ThreePointArc((-95.736430137, 47.786357306), (-88.85683433, 48.01538254), (-92.364450789, 53.938043918))
        make_face()
    extrude(amount=CUT_EXTRUDE6_DEPTH, mode=Mode.SUBTRACT)

    # Sketch10 → Cut-Extrude7 (cut)
    with BuildSketch(Plane(origin=(0, 0, 0), x_dir=(-1, 0, 0), z_dir=(0, 0, -1))):
        Circle(SKETCH10_R)
    extrude(amount=-CUT_EXTRUDE7_DEPTH, mode=Mode.SUBTRACT)

    # Fillet13
    fillet13_edges = [part.edges().sort_by_distance(p)[0] for p in [
        (-47.816723575, -94.485771133, 4),
        (-47.816723575, 94.485771133, 4),
    ]]
    fillet(fillet13_edges, radius=FILLET13_R)

    # Fillet14
    # the kernel refuses this fillet: 2 mm, written as the material it adds along each edge
    with BuildSketch(Plane(origin=(-52.938043918, 92.364450789, 1.5), x_dir=(0.19364916731417084, -0.9810708435166791, 0), z_dir=(0, 0, 1))) as fillet14_piece_1:
        with BuildLine():
            CenterArc((1.549193339, -1.962141687), FILLET14_R, 101.165822505, 49.458398129)
            Line((-0.193649167, -0.981070844), (-0.228506017, -0.961449427))
            ThreePointArc((-0.228506017, -0.961449427), (-0.136067417, -0.482789455), (-0.039242834, 0.007745967))
            Line((-0.039242834, 0.007745967), (0.007745967, 0.039242834))
            ThreePointArc((0.007745967, 0.039242834), (0.580947502, -0.016787469), (1.154149037, 0.039242834))
            Line((1.154149037, 0.039242834), (1.161895004, 0))
        make_face()
    extrude(amount=5)
    with BuildSketch(Plane(origin=(-92.364450789, 52.938043918, 1.5), x_dir=(0.9810708435182302, -0.19364916730631312, 0), z_dir=(0, 0, 1)), Plane(origin=(-94.8934353, -48.324278959, 1.5), x_dir=(0.6909844981380313, 0.7228695756033262, 0), z_dir=(0, 0, 1))) as fillet14_piece_2:
        with BuildLine():
            CenterArc((1.549193338, 1.962141687), FILLET14_R, 209.375779372, 49.458398123)
            Line((-0.193649167, 0.981070843), (-0.228506017, 0.961449427))
            ThreePointArc((-0.228506017, 0.961449427), (-0.136067417, 0.482789455), (-0.039242834, -0.007745967))
            Line((-0.039242834, -0.007745967), (0.007745967, -0.039242834))
            ThreePointArc((0.007745967, -0.039242834), (0.580947502, 0.016787469), (1.154149037, -0.039242834))
            Line((1.154149037, -0.039242834), (1.161895004, 0))
        make_face()
    extrude(amount=5)
    with BuildSketch(Plane(origin=(-94.8934353, 48.324278959, 1.5), x_dir=(-0.8429948368990979, -0.5379216531814491, 0), z_dir=(0, 0, 1))) as fillet14_piece_3:
        with BuildLine():
            CenterArc((1.625, 1.899835519), FILLET14_R, 202.331645004, 49.458398131)
            Line((-0.225, 1.139901312), (-0.262, 1.124702628))
            ThreePointArc((-0.262, 1.124702628), (-0.096030303, 0.573201535), (-0.04, 0))
            Line((-0.04, 0), (0, -0.04))
            ThreePointArc((0, -0.04), (0.5, -0.04), (0.9875, -0.03799671))
            Line((0.9875, -0.03799671), (1, 0))
        make_face()
    extrude(amount=5)
    with BuildSketch(Plane(origin=(-92.364450789, -52.938043918, 1.5), x_dir=(0, -1, 0), z_dir=(0, 0, 1))) as fillet14_piece_4:
        with BuildLine():
            CenterArc((1.625, 1.899835519), FILLET14_R, 202.331645009, 49.458398123)
            Line((-0.225, 1.139901311), (-0.262, 1.124702627))
            ThreePointArc((-0.262, 1.124702627), (-0.096030303, 0.573201535), (-0.04, 0))
            Line((-0.04, 0), (0, -0.04))
            ThreePointArc((0, -0.04), (0.5, -0.04), (0.9875, -0.03799671))
            Line((0.9875, -0.03799671), (1, 0))
        make_face()
    extrude(amount=5)
    with BuildSketch(Plane(origin=(-52.938043918, -92.364450789, 1.5), x_dir=(0.19364916731417084, 0.9810708435166791, 0), z_dir=(0, 0, 1))) as fillet14_piece_5:
        with BuildLine():
            CenterArc((1.549193339, 1.962141687), FILLET14_R, 209.375779366, 49.458398129)
            Line((-0.193649167, 0.981070844), (-0.228506017, 0.961449427))
            ThreePointArc((-0.228506017, 0.961449427), (-0.136067417, 0.482789455), (-0.039242834, -0.007745967))
            Line((-0.039242834, -0.007745967), (0.007745967, -0.039242834))
            ThreePointArc((0.007745967, -0.039242834), (0.580947502, 0.016787469), (1.154149037, -0.039242834))
            Line((1.154149037, -0.039242834), (1.161895004, 0))
        make_face()
    extrude(amount=5)

    # Sketch11 → Cut-Extrude10 (cut)
    with BuildSketch(Plane.XY.offset(6.5).offset(CUT_EXTRUDE10_START)):
        with BuildLine():
            Line((-88.364450789, 49.938043918), (9.82122629, 9.54949028))
            Line((9.82122629, 9.54949028), (-5.943869165, -97.504332158))
            Line((-5.943869165, -97.504332158), (-89.530841379, -105.956947326))
            Line((-89.530841379, -105.956947326), (-146.820788627, 13.944964128))
            Line((-146.820788627, 13.944964128), (-95.883096534, 51.840445591))
            ThreePointArc((-95.883096534, 51.840445591), (-93.345627894, 46.06024925), (-88.364450789, 49.938043918))
        make_face()
    extrude(amount=CUT_EXTRUDE10_DEPTH, mode=Mode.SUBTRACT)

    # Sketch12 → Boss-Extrude10 (add)
    with BuildSketch(Plane.XY.offset(6.5)):
        Polygon((-93.436498454, 53.93777787), (-92.410389265, 53.937973055), (-53.93777787, 92.41058445), (-56.617507196, 92.364450789), (-71.854770116, 80.829786623), (-85.355729389, 66.224878191), align=None)
    extrude(amount=-BOSS_EXTRUDE10_DEPTH)

    # Fillet15: read off the stored shape, not the designer's step
    # Fillet15 outline → Fillet15 (cut)
    with BuildSketch(Plane.XY.offset(FILLET15_START)):
        with BuildLine():
            ThreePointArc((-53.603687452, 92.219504205), (-53.771652019, 92.313436894), (-53.93777787, 92.41058445))
            ThreePointArc((-53.93777787, 92.41058445), (-53.937977406, 92.387518003), (-53.938043918, 92.364450789))
            ThreePointArc((-53.938043918, 92.364450789), (-53.767557444, 92.299608804), (-53.603687452, 92.219504205))
        make_face()
        with BuildLine():
            ThreePointArc((-92.41058445, 53.93777787), (-92.313436894, 53.77165202), (-92.219504205, 53.603687453))
            ThreePointArc((-92.219504205, 53.603687453), (-92.299608804, 53.767557444), (-92.364450789, 53.938043918))
            ThreePointArc((-92.364450789, 53.938043918), (-92.387518003, 53.937977406), (-92.41058445, 53.93777787))
        make_face()
    extrude(amount=FILLET15_DEPTH, mode=Mode.SUBTRACT)

    # Sketch13 → Cut-Extrude13 (cut)
    with BuildSketch(Plane.XY.offset(6.5).offset(CUT_EXTRUDE13_START)):
        with BuildLine():
            Line((-91.224549478, 52.713043918), (-52.713043918, 91.224549478))
            ThreePointArc((-52.713043918, 91.224549478), (-52.879536719, 92.954043956), (-52.059364262, 94.485771133))
            Line((-52.059364262, 94.485771133), (-94.485771133, 52.059364262))
            ThreePointArc((-94.485771133, 52.059364262), (-92.954043956, 52.879536719), (-91.224549478, 52.713043918))
        make_face()
    extrude(amount=CUT_EXTRUDE13_DEPTH, mode=Mode.SUBTRACT)

    # Fillet16
    fillet16_edges = [part.edges().sort_by_distance(p)[0] for p in [
        (-52.059364262, 94.485771133, 4),
    ]]
    fillet(fillet16_edges, radius=FILLET16_R)
    fillet16_2_edges = [part.edges().sort_by_distance(p)[0] for p in [
        (-94.485771133, 52.059364262, 4),
    ]]
    fillet(fillet16_2_edges, radius=FILLET16_R)

    # Sketch14 → Cut-Extrude16 (cut)
    with BuildSketch(Plane.XY.offset(6.5)):
        with Locations((-56.416458876, 88.55610181)):
            Circle(SKETCH14_R)
    extrude(amount=-CUT_EXTRUDE16_DEPTH, mode=Mode.SUBTRACT)

    # Sketch15 → Boss-Extrude11 (add)
    with BuildSketch(Plane.XY.offset(6.5)):
        with Locations((-56.416458876, 88.55610181)):
            Circle(SKETCH15_R)
        with Locations((-56.416458876, 88.55610181)):
            Circle(SKETCH15_R_2, mode=Mode.SUBTRACT)
    extrude(amount=-BOSS_EXTRUDE11_DEPTH)

    # Fillet17
    fillet17_edges = [part.edges().sort_by_distance(p)[0] for p in [
        (-54.371433285, 90.751066578, 4),
        (-59.172962512, 87.372172883, 4),
    ]]
    fillet(fillet17_edges, radius=FILLET17_R)

    # Sketch16 → Cut-Extrude17 (cut)
    with BuildSketch(Plane.XY.offset(6.5)):
        Circle(SKETCH16_R)
    extrude(amount=-CUT_EXTRUDE17_DEPTH, mode=Mode.SUBTRACT)


solid = part.part
